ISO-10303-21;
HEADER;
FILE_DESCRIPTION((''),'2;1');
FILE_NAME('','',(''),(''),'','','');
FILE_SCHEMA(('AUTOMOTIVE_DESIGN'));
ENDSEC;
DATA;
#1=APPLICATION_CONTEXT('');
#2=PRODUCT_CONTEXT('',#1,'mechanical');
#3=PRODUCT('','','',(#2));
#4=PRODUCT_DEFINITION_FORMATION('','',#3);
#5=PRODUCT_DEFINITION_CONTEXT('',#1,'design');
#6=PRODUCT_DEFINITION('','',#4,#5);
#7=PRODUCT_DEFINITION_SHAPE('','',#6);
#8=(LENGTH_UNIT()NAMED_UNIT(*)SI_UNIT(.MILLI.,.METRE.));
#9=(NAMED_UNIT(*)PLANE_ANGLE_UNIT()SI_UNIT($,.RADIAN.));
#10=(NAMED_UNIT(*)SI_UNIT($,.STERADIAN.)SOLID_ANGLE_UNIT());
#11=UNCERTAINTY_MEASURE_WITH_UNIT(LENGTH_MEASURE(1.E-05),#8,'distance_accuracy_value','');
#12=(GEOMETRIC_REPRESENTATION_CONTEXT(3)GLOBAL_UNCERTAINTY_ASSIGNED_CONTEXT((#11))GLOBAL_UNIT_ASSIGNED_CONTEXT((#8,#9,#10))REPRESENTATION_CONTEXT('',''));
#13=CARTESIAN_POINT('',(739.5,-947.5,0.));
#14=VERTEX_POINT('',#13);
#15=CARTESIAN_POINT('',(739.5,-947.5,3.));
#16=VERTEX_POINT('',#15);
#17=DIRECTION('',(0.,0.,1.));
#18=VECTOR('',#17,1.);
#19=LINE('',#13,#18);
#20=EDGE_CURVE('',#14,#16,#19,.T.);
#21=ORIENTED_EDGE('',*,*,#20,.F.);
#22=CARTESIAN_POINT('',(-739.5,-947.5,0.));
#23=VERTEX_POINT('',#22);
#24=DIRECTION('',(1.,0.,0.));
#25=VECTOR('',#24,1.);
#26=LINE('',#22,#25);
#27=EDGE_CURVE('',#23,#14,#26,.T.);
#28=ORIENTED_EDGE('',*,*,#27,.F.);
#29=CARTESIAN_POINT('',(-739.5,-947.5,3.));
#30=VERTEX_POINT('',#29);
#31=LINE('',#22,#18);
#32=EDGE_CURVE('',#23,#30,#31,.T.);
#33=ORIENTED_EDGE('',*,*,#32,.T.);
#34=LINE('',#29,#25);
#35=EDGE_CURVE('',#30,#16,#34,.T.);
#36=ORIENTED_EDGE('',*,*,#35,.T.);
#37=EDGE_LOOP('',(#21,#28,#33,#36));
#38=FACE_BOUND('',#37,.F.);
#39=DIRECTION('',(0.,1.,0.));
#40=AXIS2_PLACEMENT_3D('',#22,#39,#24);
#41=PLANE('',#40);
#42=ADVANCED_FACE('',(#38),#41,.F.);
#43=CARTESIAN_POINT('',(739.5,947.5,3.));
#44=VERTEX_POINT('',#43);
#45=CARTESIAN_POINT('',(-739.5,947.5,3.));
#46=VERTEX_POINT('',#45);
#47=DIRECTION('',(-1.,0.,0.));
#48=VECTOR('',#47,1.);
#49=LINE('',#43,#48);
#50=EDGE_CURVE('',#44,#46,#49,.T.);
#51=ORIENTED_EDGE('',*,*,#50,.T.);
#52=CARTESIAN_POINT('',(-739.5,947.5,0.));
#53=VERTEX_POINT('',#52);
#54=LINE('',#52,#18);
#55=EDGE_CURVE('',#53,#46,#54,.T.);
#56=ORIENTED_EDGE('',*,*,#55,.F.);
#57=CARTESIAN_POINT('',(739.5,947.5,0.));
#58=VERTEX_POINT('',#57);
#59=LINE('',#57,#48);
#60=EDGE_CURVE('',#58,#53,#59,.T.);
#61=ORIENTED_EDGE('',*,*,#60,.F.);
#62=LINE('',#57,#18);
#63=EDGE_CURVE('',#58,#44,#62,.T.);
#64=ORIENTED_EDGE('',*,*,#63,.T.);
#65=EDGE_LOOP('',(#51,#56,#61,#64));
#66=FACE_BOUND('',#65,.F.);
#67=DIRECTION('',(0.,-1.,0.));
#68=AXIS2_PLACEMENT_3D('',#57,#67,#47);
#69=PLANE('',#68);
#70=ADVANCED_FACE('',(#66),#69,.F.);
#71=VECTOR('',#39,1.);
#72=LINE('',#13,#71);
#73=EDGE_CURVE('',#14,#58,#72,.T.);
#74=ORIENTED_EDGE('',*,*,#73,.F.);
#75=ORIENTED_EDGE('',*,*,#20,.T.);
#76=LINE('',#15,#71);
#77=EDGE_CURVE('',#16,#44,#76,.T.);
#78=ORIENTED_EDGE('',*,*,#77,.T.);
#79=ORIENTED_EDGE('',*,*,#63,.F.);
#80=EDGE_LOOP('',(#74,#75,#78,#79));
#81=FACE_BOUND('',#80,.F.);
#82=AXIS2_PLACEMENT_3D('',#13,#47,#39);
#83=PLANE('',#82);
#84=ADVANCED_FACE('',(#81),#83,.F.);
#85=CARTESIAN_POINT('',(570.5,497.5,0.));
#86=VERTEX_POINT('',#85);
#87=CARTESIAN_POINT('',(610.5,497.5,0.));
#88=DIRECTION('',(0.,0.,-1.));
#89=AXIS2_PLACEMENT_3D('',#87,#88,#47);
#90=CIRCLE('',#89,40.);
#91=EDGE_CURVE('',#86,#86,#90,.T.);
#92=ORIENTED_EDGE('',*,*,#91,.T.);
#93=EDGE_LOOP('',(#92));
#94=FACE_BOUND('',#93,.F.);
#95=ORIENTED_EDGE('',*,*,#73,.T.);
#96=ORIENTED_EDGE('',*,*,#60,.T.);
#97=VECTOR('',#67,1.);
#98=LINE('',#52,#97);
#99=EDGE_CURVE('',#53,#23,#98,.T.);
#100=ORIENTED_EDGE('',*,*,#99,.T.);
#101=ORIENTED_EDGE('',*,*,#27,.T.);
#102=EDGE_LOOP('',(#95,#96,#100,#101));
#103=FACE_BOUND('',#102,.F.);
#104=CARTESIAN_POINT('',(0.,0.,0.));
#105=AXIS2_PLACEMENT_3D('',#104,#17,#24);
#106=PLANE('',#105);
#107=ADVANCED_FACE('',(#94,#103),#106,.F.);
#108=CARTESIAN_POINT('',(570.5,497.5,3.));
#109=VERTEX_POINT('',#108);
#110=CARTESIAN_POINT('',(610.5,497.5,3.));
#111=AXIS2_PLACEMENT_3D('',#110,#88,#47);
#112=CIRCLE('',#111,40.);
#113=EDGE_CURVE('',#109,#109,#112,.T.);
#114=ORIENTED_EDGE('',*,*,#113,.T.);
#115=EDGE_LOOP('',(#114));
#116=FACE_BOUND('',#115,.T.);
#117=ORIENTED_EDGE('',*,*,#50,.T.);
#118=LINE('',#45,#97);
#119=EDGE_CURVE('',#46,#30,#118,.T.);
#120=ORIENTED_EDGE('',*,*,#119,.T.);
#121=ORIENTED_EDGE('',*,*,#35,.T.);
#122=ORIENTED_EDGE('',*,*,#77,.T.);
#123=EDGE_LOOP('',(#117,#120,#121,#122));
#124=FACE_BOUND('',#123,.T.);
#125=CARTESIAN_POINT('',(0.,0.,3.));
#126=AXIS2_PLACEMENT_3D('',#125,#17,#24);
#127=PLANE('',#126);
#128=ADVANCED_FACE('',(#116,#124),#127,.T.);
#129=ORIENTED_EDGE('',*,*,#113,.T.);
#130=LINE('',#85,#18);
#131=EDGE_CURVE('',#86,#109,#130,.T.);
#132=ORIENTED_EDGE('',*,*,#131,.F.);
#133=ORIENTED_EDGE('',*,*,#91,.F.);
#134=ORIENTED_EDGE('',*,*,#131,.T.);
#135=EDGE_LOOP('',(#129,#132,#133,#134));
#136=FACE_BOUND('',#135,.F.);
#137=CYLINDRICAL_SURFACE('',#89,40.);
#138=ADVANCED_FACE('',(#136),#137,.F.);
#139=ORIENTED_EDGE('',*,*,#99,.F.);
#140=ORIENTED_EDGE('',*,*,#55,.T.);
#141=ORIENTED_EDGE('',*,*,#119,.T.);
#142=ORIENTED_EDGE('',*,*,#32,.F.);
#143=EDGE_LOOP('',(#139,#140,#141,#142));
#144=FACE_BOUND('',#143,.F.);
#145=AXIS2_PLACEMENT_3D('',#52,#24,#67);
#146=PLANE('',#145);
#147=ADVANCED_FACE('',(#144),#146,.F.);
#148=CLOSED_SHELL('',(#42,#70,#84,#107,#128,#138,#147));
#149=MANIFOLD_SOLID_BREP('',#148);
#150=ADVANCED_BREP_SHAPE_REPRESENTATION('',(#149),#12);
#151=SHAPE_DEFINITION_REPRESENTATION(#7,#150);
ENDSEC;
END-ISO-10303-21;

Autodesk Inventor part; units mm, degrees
ref_plane "YZ Plane" through (0, 0, 0) normal (1, 0, 0) x (0, 1, 0)
ref_plane "XZ Plane" through (0, 0, 0) normal (0, 1, 0) x (-1, 0, 0)
ref_plane "XY Plane" through (0, 0, 0) normal (0, 0, 1) x (1, 0, 0)
sketch "Sketch6" plane through (0, 0, 0) normal (0, 0, 1) x (1, 0, 0)
  line L0 (739.5, 947.5) -> (-739.5, 947.5)
  line L1 (-739.5, 947.5) -> (-739.5, -947.5)
  line L2 (-739.5, -947.5) -> (739.5, -947.5)
  line L3 (739.5, -947.5) -> (739.5, 947.5)
  line L4 (739.5, 947.5) -> (-739.5, -947.5) construction
  line L5 (-739.5, 947.5) -> (739.5, -947.5) construction
  point P0 (0, 0)
  dimension "d40" = 1479
  dimension "d41" = 1895
extrude "Plate5" add sketch "Sketch6" along normal blind 3
sketch "Sketch7" plane through (0, 0, 0) normal (0, 0, -1) x (-1, 0, 0)
  line L0 (-714.5, 922.5) -> (-514.5, 922.5) construction
  line L1 (-514.5, 922.5) -> (-514.5, 907.5) construction
  line L2 (-514.5, 907.5) -> (-714.5, 907.5) construction
  line L3 (-714.5, 907.5) -> (-714.5, 922.5) construction
  line L4 (-739.5, 947.5) -> (739.5, 947.5) projected
  line L5 (-739.5, -947.5) -> (-739.5, 947.5) projected
  point P0 (0, 0)
  dimension "d43" = 200
  dimension "d44" = 15
  dimension "d45" = 25
  dimension "d46" = 25
mark "Mark1"
sketch "Sketch8" plane through (739.5, 947.5, 0) normal (0, 0, -1) x (-1, 0, 0)
  circle A0 centre (129, -450) radius 40
  line L0 (1479, 0) -> (1479, -1895) projected
  line L1 (0, 0) -> (1479, 0) projected
  point P0 (739.5, -947.5)
  dimension "d47" = 80
  dimension "d48" = 1350
  dimension "d49" = 450
extrude "Extrusion3" cut sketch "Sketch8" against normal up to surface (3 mm away)
equation "\"d42\" = Thickness"
equation "\"BendReliefWidth\" = Thickness"
equation "\"BendReliefDepth\" = 0.5 * Thickness"
equation "\"CornerReliefSize\" = 4 * Thickness"
equation "\"MinimumRemnant\" = 2 * Thickness"
equation "\"TransitionRadius\" = BendRadius"
equation "\"JacobiRadiusSize\" = BendRadius"
equation "\"GapSize\" = Thickness"
equation "\"Thickness\" = 3"
equation "\"BendRadius\" = 5"
properties part number "BSH 046 back" material "09g2s"
